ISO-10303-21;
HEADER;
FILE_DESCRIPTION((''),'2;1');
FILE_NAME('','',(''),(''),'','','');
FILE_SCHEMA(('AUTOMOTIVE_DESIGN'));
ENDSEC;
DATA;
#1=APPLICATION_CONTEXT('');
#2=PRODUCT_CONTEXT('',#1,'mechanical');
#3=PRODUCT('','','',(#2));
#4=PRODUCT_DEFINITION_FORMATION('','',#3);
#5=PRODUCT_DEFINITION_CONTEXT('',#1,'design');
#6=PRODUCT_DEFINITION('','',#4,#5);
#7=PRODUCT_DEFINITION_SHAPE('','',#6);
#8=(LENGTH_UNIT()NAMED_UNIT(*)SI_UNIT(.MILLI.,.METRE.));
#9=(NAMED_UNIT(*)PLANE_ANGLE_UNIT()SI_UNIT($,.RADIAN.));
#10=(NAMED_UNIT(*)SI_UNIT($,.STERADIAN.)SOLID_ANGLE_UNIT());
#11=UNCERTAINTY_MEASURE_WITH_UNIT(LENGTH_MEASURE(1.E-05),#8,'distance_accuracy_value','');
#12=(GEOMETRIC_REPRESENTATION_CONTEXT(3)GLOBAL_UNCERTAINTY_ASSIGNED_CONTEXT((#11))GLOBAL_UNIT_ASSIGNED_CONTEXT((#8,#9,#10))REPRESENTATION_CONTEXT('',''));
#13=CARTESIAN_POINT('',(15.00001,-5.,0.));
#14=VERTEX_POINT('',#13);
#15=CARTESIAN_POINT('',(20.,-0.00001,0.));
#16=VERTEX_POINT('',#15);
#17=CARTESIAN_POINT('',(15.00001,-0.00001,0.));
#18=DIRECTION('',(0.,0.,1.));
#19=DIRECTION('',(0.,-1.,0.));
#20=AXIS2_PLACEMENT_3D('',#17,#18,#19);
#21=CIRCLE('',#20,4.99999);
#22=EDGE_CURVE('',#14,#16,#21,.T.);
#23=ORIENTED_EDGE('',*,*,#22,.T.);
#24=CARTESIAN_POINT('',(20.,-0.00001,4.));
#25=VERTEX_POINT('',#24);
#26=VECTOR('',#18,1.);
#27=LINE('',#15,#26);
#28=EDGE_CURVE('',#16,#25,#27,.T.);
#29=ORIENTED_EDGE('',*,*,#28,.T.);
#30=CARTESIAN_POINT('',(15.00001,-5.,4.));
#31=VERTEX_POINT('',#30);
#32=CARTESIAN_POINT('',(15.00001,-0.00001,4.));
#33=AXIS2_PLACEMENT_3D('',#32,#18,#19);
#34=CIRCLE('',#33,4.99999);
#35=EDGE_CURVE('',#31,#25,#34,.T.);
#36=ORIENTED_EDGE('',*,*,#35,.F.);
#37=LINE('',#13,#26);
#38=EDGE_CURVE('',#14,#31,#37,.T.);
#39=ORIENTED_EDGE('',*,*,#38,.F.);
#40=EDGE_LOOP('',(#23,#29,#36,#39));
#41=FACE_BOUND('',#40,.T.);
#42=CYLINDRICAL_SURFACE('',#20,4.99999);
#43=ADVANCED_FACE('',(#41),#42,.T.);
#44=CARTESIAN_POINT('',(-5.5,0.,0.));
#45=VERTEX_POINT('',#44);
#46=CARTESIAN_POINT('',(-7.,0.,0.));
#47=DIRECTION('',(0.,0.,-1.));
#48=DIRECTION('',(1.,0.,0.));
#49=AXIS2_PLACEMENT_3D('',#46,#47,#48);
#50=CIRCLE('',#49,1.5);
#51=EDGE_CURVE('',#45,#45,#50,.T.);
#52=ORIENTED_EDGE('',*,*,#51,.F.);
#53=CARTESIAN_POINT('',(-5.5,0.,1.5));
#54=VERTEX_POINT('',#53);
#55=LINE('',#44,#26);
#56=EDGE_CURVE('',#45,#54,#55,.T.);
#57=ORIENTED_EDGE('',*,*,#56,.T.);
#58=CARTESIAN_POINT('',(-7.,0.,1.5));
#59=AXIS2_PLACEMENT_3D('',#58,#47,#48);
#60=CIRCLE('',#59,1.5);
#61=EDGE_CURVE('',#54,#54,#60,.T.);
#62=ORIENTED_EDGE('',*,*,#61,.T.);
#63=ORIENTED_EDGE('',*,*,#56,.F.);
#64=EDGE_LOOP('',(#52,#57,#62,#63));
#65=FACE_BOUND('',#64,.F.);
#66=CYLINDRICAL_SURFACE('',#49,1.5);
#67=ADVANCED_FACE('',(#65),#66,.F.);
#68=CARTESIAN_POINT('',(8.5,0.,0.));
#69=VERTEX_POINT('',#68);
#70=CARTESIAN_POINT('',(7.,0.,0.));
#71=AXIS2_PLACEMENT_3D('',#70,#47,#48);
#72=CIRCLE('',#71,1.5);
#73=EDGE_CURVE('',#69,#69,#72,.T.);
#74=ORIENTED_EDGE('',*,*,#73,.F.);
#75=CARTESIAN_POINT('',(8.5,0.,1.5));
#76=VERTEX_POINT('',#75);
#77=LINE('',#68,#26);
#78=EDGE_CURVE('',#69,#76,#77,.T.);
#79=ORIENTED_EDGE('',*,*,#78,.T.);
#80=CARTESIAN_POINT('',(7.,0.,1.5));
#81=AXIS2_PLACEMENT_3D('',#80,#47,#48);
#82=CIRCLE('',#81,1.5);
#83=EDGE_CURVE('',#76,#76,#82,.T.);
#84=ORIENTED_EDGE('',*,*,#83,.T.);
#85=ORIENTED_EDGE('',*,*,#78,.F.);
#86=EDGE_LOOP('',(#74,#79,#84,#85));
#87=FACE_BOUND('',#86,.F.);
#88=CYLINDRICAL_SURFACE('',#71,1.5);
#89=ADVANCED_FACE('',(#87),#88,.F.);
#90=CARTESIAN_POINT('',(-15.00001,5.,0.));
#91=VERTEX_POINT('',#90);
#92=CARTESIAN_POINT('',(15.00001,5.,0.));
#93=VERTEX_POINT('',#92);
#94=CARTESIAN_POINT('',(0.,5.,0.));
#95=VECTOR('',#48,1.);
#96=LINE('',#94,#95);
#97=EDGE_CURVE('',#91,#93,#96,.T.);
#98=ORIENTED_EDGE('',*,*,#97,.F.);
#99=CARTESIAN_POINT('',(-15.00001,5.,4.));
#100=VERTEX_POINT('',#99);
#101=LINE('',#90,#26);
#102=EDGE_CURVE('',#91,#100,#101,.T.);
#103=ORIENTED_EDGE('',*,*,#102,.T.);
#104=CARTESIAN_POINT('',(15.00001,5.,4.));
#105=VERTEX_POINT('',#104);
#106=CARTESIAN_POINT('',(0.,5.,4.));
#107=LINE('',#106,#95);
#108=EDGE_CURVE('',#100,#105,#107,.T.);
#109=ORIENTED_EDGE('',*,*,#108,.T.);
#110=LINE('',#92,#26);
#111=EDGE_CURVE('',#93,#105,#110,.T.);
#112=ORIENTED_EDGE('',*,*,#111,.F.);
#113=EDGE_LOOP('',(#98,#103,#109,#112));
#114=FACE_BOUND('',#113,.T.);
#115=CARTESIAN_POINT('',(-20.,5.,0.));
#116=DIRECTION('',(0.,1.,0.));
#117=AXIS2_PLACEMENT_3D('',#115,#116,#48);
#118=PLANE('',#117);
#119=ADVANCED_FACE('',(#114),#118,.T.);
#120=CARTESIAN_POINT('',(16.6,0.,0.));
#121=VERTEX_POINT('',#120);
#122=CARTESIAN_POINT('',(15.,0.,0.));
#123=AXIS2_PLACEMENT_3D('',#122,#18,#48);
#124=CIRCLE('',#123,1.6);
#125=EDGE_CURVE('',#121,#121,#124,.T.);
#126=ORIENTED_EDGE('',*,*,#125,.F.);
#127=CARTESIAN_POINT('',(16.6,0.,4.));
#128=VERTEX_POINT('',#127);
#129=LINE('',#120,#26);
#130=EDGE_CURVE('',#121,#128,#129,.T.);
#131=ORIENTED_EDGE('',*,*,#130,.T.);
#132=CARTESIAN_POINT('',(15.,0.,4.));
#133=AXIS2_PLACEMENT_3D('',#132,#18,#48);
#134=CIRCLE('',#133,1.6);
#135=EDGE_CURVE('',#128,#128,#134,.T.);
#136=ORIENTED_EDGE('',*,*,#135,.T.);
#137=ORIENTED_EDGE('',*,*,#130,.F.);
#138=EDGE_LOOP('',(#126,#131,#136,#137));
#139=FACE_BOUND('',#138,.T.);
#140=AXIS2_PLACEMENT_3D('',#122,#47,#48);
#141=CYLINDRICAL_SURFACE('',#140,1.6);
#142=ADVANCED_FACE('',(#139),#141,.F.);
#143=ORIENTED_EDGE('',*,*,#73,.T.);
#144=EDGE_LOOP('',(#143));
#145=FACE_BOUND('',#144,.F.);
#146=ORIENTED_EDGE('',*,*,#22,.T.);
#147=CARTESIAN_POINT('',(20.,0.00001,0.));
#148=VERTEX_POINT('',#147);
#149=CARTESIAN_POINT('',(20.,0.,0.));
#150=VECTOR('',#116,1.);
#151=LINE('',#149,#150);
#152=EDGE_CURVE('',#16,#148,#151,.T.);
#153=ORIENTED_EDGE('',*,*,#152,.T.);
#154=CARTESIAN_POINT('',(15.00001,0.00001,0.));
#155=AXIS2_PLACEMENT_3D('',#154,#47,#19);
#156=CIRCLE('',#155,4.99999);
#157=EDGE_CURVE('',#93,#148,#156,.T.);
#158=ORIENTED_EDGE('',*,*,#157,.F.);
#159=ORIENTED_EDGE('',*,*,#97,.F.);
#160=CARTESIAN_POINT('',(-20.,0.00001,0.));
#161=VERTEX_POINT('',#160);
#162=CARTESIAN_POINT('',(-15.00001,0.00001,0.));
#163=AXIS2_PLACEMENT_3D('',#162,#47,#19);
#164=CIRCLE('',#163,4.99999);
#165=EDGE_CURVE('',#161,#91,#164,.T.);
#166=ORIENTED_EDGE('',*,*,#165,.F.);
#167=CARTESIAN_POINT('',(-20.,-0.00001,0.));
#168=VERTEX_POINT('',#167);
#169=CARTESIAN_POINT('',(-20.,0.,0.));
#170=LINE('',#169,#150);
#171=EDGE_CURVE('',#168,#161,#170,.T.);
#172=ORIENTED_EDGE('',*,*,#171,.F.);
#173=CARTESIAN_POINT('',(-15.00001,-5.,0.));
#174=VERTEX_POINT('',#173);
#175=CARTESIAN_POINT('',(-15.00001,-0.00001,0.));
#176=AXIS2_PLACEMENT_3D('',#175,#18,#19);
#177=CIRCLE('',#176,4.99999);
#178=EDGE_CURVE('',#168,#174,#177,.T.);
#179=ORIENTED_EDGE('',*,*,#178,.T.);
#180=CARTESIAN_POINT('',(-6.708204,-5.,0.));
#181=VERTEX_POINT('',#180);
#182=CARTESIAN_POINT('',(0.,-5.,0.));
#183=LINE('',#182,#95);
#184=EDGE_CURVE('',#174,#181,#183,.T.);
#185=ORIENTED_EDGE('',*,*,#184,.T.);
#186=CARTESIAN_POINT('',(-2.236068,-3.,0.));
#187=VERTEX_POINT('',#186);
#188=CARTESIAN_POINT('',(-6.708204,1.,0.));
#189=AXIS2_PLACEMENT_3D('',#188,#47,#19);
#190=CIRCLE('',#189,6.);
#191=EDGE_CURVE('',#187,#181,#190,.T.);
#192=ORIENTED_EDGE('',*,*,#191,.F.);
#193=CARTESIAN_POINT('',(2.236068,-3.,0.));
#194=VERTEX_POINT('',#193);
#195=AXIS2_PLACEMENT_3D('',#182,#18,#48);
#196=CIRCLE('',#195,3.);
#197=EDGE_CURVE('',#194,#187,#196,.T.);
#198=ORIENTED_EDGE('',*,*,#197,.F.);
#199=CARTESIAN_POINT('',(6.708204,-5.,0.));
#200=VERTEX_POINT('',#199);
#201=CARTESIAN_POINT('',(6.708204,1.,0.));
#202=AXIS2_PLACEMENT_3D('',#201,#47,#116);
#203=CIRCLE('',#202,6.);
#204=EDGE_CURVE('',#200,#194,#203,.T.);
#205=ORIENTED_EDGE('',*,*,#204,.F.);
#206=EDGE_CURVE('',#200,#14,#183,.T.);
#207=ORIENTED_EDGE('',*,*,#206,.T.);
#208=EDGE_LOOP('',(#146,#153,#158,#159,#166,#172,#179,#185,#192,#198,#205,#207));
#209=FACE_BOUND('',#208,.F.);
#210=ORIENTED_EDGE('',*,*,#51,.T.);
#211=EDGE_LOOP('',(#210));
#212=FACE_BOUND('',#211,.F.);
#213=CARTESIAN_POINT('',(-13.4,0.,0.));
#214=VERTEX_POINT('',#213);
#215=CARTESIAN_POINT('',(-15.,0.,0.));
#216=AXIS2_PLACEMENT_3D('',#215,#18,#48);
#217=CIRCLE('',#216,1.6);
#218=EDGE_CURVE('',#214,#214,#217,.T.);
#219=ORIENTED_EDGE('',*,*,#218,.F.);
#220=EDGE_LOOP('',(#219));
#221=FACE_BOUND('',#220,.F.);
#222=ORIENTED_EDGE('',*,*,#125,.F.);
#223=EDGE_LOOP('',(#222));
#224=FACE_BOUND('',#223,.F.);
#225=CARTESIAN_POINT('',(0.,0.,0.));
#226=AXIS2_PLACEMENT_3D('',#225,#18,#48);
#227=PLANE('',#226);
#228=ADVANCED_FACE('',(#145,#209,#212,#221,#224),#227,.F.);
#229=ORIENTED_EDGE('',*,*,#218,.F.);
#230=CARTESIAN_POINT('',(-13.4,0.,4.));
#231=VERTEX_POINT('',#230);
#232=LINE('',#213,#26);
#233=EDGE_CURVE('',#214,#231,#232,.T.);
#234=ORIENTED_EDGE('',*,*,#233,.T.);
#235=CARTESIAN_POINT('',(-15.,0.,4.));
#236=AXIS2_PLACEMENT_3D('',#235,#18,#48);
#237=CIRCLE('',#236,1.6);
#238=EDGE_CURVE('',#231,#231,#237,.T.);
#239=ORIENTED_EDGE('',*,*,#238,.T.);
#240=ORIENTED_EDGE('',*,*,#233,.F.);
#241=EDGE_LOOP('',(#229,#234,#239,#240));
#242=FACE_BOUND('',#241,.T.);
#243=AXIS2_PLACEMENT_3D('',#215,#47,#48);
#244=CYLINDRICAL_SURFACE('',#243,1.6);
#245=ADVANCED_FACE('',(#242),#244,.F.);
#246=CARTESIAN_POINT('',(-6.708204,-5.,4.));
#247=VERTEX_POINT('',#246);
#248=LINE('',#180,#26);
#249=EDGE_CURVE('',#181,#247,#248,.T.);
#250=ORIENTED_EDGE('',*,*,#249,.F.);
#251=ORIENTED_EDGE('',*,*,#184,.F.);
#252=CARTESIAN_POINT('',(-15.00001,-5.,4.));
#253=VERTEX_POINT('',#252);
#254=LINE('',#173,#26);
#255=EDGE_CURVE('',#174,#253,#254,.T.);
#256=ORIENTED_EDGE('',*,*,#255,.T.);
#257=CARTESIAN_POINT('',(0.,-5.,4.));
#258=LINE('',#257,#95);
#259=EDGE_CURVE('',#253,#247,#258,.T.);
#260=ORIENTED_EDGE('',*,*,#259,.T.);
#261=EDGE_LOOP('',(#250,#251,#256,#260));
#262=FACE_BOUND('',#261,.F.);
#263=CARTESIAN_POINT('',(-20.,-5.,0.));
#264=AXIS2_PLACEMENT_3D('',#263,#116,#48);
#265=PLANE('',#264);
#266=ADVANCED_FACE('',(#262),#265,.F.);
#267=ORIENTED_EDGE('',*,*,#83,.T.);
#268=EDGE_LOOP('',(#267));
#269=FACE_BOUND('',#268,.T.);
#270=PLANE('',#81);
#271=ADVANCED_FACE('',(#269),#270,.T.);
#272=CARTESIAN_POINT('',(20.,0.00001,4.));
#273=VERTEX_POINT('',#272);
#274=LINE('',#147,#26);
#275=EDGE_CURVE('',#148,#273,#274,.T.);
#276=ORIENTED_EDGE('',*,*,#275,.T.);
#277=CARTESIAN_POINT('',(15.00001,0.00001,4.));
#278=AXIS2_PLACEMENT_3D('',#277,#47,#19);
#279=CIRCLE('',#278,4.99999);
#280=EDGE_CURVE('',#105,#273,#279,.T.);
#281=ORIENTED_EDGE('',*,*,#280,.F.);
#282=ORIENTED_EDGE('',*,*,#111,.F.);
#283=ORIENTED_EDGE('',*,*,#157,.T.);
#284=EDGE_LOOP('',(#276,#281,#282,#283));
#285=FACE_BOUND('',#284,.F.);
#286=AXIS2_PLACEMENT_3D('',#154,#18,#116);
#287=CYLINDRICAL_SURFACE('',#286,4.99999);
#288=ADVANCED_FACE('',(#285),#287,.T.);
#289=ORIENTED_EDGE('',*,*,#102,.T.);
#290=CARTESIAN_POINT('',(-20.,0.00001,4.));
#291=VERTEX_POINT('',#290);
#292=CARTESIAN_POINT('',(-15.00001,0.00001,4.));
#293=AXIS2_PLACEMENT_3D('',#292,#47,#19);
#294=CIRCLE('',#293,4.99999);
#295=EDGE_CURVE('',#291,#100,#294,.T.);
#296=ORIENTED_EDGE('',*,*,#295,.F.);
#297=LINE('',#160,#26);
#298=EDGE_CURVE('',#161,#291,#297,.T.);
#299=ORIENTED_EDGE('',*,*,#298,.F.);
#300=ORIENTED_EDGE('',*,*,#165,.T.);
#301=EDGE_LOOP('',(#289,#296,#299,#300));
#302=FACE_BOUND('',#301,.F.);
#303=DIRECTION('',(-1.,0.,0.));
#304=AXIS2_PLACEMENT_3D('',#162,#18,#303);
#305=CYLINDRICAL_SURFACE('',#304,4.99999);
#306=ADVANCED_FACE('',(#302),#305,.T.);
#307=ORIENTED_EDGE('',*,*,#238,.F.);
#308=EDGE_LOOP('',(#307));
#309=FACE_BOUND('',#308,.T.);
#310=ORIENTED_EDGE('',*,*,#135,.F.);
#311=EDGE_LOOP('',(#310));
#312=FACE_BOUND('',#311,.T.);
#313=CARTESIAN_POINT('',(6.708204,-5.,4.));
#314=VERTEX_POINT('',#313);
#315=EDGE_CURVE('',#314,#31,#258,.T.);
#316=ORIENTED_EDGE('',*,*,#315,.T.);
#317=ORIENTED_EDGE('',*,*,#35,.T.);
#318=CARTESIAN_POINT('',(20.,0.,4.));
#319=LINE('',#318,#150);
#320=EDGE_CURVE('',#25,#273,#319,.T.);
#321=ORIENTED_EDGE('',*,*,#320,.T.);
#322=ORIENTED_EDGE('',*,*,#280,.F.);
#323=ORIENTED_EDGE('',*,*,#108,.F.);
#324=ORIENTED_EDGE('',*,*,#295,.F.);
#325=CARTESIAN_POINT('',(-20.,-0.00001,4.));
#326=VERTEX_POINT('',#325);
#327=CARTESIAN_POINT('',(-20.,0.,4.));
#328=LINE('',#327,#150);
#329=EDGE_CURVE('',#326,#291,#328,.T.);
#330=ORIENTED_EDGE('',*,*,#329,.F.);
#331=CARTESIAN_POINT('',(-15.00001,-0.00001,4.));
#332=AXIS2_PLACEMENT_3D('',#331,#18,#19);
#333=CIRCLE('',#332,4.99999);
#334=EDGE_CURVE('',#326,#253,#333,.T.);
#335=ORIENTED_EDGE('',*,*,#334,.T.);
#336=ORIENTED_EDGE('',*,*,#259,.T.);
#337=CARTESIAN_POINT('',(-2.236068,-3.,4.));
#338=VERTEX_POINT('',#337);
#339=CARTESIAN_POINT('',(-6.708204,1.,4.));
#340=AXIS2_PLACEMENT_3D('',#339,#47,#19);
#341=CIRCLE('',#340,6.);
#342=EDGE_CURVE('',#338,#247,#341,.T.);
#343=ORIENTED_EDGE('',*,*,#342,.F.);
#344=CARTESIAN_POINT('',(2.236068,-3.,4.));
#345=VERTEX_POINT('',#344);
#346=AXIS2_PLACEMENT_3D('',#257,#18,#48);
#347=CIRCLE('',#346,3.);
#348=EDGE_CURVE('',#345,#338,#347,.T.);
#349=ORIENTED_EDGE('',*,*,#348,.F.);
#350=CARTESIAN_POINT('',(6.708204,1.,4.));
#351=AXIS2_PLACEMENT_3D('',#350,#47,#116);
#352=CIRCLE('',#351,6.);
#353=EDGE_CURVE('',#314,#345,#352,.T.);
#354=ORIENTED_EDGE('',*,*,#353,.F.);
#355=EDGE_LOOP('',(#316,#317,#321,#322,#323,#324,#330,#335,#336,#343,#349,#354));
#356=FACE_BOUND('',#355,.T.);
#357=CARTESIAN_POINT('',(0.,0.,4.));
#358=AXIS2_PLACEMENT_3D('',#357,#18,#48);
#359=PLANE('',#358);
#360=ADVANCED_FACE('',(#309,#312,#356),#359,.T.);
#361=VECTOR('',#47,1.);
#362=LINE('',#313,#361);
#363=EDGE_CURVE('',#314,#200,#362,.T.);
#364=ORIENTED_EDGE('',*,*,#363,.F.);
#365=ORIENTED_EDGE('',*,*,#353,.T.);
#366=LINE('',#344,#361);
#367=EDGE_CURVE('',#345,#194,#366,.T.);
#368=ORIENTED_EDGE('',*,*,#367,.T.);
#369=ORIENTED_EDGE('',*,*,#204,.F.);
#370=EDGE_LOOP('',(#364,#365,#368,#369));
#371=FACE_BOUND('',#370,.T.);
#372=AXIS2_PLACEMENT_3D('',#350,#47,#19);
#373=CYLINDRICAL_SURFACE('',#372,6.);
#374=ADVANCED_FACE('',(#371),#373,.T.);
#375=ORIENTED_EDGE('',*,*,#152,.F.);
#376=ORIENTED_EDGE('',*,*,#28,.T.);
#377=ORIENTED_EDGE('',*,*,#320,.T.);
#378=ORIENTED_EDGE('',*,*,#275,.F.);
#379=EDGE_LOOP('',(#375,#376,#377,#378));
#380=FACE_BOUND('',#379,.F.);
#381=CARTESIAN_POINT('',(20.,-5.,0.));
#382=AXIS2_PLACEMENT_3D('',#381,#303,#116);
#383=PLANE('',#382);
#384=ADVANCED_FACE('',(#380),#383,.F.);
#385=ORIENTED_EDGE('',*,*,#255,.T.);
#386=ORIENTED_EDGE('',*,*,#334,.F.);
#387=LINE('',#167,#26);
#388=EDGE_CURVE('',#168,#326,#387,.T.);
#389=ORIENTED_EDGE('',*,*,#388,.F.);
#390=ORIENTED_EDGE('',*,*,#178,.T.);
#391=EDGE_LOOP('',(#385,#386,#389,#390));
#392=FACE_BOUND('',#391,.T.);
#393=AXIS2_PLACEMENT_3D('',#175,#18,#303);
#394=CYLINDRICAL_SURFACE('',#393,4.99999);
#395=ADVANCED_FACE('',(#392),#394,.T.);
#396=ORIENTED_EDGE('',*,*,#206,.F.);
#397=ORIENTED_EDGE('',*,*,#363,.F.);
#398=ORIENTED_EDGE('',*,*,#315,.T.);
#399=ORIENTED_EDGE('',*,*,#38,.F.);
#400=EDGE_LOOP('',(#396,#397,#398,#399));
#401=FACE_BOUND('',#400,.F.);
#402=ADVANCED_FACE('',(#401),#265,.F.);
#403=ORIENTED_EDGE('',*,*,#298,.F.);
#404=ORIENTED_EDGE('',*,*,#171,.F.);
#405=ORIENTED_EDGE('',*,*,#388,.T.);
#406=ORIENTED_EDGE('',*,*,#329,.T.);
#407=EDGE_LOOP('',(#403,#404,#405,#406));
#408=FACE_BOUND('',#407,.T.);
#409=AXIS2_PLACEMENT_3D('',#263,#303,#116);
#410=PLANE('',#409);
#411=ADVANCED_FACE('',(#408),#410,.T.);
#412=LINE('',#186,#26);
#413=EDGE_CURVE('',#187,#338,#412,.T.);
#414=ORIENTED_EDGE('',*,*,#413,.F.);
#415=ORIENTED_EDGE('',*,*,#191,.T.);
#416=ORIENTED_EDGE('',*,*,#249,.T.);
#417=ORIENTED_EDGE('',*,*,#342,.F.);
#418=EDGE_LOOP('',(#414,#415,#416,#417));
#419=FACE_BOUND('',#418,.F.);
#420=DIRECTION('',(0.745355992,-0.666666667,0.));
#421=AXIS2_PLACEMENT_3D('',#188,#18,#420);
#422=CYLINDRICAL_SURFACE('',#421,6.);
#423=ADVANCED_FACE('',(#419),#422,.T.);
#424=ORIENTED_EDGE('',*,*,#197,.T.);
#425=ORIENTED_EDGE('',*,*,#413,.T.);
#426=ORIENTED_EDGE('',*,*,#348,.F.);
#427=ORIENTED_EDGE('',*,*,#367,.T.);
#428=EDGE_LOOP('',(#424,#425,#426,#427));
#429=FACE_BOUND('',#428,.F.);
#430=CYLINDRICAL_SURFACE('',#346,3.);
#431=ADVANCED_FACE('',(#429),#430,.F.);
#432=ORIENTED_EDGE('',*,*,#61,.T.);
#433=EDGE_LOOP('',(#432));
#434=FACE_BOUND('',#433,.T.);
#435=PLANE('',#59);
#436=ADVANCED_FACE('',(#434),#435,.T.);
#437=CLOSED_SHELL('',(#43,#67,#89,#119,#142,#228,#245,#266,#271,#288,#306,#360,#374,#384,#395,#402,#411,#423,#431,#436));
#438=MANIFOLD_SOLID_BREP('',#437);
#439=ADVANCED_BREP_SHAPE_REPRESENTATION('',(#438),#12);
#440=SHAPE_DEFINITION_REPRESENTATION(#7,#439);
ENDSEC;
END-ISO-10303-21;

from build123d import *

# Parameters (mm, degrees)
F0_W     = 40
F0_H     = 10
F0_R     = 1.6
F1_DEPTH = 4
F2_R     = 1.5
F3_DEPTH = 1.5
F4_R     = 4.99999
F5_R     = 3
F6_DEPTH = 25
F7_R     = 6


# Not quite as in the source:
# - a fillet or chamfer is up to 0.001 mm smaller than in the source, because OpenCascade refuses the exact size


with BuildPart() as f1:
    # F0 (on Top) → F1 (new body)
    with BuildSketch(Plane.XY):
        Rectangle(F0_W, F0_H)
        with Locations((-15, 0)):
            Circle(F0_R, mode=Mode.SUBTRACT)
        with Locations((15, 0)):
            Circle(F0_R, mode=Mode.SUBTRACT)
    extrude(amount=F1_DEPTH)

    # F2 (on face) → F3 (cut)
    with BuildSketch(Plane(origin=(0, 0, 0), x_dir=(1, 0, 0), z_dir=(0, 0, -1))):
        with Locations((-7, 0)):
            Circle(F2_R)
        with Locations((7, 0)):
            Circle(F2_R)
    extrude(amount=-F3_DEPTH, mode=Mode.SUBTRACT)

    # F4 (radius 5 in the source; OpenCascade refuses exactly that, so slightly less here)
    f4_edges = [f1.edges().sort_by_distance(p)[0] for p in [
        (-20, -5, 2),
        (-20, 5, 2),
        (20, 5, 2),
        (20, -5, 2),
    ]]
    fillet(f4_edges, radius=F4_R)

    # F5 (on face) → F6 (cut)
    with BuildSketch(Plane.XY.offset(4)):
        with Locations((0, -5)):
            Circle(F5_R)
    extrude(amount=-F6_DEPTH, mode=Mode.SUBTRACT)

    # F7
    f7_edges = [f1.edges().sort_by_distance(p)[0] for p in [
        (3, -5, 2),
        (-3, -5, 2),
    ]]
    fillet(f7_edges, radius=F7_R)


solid = f1.part
